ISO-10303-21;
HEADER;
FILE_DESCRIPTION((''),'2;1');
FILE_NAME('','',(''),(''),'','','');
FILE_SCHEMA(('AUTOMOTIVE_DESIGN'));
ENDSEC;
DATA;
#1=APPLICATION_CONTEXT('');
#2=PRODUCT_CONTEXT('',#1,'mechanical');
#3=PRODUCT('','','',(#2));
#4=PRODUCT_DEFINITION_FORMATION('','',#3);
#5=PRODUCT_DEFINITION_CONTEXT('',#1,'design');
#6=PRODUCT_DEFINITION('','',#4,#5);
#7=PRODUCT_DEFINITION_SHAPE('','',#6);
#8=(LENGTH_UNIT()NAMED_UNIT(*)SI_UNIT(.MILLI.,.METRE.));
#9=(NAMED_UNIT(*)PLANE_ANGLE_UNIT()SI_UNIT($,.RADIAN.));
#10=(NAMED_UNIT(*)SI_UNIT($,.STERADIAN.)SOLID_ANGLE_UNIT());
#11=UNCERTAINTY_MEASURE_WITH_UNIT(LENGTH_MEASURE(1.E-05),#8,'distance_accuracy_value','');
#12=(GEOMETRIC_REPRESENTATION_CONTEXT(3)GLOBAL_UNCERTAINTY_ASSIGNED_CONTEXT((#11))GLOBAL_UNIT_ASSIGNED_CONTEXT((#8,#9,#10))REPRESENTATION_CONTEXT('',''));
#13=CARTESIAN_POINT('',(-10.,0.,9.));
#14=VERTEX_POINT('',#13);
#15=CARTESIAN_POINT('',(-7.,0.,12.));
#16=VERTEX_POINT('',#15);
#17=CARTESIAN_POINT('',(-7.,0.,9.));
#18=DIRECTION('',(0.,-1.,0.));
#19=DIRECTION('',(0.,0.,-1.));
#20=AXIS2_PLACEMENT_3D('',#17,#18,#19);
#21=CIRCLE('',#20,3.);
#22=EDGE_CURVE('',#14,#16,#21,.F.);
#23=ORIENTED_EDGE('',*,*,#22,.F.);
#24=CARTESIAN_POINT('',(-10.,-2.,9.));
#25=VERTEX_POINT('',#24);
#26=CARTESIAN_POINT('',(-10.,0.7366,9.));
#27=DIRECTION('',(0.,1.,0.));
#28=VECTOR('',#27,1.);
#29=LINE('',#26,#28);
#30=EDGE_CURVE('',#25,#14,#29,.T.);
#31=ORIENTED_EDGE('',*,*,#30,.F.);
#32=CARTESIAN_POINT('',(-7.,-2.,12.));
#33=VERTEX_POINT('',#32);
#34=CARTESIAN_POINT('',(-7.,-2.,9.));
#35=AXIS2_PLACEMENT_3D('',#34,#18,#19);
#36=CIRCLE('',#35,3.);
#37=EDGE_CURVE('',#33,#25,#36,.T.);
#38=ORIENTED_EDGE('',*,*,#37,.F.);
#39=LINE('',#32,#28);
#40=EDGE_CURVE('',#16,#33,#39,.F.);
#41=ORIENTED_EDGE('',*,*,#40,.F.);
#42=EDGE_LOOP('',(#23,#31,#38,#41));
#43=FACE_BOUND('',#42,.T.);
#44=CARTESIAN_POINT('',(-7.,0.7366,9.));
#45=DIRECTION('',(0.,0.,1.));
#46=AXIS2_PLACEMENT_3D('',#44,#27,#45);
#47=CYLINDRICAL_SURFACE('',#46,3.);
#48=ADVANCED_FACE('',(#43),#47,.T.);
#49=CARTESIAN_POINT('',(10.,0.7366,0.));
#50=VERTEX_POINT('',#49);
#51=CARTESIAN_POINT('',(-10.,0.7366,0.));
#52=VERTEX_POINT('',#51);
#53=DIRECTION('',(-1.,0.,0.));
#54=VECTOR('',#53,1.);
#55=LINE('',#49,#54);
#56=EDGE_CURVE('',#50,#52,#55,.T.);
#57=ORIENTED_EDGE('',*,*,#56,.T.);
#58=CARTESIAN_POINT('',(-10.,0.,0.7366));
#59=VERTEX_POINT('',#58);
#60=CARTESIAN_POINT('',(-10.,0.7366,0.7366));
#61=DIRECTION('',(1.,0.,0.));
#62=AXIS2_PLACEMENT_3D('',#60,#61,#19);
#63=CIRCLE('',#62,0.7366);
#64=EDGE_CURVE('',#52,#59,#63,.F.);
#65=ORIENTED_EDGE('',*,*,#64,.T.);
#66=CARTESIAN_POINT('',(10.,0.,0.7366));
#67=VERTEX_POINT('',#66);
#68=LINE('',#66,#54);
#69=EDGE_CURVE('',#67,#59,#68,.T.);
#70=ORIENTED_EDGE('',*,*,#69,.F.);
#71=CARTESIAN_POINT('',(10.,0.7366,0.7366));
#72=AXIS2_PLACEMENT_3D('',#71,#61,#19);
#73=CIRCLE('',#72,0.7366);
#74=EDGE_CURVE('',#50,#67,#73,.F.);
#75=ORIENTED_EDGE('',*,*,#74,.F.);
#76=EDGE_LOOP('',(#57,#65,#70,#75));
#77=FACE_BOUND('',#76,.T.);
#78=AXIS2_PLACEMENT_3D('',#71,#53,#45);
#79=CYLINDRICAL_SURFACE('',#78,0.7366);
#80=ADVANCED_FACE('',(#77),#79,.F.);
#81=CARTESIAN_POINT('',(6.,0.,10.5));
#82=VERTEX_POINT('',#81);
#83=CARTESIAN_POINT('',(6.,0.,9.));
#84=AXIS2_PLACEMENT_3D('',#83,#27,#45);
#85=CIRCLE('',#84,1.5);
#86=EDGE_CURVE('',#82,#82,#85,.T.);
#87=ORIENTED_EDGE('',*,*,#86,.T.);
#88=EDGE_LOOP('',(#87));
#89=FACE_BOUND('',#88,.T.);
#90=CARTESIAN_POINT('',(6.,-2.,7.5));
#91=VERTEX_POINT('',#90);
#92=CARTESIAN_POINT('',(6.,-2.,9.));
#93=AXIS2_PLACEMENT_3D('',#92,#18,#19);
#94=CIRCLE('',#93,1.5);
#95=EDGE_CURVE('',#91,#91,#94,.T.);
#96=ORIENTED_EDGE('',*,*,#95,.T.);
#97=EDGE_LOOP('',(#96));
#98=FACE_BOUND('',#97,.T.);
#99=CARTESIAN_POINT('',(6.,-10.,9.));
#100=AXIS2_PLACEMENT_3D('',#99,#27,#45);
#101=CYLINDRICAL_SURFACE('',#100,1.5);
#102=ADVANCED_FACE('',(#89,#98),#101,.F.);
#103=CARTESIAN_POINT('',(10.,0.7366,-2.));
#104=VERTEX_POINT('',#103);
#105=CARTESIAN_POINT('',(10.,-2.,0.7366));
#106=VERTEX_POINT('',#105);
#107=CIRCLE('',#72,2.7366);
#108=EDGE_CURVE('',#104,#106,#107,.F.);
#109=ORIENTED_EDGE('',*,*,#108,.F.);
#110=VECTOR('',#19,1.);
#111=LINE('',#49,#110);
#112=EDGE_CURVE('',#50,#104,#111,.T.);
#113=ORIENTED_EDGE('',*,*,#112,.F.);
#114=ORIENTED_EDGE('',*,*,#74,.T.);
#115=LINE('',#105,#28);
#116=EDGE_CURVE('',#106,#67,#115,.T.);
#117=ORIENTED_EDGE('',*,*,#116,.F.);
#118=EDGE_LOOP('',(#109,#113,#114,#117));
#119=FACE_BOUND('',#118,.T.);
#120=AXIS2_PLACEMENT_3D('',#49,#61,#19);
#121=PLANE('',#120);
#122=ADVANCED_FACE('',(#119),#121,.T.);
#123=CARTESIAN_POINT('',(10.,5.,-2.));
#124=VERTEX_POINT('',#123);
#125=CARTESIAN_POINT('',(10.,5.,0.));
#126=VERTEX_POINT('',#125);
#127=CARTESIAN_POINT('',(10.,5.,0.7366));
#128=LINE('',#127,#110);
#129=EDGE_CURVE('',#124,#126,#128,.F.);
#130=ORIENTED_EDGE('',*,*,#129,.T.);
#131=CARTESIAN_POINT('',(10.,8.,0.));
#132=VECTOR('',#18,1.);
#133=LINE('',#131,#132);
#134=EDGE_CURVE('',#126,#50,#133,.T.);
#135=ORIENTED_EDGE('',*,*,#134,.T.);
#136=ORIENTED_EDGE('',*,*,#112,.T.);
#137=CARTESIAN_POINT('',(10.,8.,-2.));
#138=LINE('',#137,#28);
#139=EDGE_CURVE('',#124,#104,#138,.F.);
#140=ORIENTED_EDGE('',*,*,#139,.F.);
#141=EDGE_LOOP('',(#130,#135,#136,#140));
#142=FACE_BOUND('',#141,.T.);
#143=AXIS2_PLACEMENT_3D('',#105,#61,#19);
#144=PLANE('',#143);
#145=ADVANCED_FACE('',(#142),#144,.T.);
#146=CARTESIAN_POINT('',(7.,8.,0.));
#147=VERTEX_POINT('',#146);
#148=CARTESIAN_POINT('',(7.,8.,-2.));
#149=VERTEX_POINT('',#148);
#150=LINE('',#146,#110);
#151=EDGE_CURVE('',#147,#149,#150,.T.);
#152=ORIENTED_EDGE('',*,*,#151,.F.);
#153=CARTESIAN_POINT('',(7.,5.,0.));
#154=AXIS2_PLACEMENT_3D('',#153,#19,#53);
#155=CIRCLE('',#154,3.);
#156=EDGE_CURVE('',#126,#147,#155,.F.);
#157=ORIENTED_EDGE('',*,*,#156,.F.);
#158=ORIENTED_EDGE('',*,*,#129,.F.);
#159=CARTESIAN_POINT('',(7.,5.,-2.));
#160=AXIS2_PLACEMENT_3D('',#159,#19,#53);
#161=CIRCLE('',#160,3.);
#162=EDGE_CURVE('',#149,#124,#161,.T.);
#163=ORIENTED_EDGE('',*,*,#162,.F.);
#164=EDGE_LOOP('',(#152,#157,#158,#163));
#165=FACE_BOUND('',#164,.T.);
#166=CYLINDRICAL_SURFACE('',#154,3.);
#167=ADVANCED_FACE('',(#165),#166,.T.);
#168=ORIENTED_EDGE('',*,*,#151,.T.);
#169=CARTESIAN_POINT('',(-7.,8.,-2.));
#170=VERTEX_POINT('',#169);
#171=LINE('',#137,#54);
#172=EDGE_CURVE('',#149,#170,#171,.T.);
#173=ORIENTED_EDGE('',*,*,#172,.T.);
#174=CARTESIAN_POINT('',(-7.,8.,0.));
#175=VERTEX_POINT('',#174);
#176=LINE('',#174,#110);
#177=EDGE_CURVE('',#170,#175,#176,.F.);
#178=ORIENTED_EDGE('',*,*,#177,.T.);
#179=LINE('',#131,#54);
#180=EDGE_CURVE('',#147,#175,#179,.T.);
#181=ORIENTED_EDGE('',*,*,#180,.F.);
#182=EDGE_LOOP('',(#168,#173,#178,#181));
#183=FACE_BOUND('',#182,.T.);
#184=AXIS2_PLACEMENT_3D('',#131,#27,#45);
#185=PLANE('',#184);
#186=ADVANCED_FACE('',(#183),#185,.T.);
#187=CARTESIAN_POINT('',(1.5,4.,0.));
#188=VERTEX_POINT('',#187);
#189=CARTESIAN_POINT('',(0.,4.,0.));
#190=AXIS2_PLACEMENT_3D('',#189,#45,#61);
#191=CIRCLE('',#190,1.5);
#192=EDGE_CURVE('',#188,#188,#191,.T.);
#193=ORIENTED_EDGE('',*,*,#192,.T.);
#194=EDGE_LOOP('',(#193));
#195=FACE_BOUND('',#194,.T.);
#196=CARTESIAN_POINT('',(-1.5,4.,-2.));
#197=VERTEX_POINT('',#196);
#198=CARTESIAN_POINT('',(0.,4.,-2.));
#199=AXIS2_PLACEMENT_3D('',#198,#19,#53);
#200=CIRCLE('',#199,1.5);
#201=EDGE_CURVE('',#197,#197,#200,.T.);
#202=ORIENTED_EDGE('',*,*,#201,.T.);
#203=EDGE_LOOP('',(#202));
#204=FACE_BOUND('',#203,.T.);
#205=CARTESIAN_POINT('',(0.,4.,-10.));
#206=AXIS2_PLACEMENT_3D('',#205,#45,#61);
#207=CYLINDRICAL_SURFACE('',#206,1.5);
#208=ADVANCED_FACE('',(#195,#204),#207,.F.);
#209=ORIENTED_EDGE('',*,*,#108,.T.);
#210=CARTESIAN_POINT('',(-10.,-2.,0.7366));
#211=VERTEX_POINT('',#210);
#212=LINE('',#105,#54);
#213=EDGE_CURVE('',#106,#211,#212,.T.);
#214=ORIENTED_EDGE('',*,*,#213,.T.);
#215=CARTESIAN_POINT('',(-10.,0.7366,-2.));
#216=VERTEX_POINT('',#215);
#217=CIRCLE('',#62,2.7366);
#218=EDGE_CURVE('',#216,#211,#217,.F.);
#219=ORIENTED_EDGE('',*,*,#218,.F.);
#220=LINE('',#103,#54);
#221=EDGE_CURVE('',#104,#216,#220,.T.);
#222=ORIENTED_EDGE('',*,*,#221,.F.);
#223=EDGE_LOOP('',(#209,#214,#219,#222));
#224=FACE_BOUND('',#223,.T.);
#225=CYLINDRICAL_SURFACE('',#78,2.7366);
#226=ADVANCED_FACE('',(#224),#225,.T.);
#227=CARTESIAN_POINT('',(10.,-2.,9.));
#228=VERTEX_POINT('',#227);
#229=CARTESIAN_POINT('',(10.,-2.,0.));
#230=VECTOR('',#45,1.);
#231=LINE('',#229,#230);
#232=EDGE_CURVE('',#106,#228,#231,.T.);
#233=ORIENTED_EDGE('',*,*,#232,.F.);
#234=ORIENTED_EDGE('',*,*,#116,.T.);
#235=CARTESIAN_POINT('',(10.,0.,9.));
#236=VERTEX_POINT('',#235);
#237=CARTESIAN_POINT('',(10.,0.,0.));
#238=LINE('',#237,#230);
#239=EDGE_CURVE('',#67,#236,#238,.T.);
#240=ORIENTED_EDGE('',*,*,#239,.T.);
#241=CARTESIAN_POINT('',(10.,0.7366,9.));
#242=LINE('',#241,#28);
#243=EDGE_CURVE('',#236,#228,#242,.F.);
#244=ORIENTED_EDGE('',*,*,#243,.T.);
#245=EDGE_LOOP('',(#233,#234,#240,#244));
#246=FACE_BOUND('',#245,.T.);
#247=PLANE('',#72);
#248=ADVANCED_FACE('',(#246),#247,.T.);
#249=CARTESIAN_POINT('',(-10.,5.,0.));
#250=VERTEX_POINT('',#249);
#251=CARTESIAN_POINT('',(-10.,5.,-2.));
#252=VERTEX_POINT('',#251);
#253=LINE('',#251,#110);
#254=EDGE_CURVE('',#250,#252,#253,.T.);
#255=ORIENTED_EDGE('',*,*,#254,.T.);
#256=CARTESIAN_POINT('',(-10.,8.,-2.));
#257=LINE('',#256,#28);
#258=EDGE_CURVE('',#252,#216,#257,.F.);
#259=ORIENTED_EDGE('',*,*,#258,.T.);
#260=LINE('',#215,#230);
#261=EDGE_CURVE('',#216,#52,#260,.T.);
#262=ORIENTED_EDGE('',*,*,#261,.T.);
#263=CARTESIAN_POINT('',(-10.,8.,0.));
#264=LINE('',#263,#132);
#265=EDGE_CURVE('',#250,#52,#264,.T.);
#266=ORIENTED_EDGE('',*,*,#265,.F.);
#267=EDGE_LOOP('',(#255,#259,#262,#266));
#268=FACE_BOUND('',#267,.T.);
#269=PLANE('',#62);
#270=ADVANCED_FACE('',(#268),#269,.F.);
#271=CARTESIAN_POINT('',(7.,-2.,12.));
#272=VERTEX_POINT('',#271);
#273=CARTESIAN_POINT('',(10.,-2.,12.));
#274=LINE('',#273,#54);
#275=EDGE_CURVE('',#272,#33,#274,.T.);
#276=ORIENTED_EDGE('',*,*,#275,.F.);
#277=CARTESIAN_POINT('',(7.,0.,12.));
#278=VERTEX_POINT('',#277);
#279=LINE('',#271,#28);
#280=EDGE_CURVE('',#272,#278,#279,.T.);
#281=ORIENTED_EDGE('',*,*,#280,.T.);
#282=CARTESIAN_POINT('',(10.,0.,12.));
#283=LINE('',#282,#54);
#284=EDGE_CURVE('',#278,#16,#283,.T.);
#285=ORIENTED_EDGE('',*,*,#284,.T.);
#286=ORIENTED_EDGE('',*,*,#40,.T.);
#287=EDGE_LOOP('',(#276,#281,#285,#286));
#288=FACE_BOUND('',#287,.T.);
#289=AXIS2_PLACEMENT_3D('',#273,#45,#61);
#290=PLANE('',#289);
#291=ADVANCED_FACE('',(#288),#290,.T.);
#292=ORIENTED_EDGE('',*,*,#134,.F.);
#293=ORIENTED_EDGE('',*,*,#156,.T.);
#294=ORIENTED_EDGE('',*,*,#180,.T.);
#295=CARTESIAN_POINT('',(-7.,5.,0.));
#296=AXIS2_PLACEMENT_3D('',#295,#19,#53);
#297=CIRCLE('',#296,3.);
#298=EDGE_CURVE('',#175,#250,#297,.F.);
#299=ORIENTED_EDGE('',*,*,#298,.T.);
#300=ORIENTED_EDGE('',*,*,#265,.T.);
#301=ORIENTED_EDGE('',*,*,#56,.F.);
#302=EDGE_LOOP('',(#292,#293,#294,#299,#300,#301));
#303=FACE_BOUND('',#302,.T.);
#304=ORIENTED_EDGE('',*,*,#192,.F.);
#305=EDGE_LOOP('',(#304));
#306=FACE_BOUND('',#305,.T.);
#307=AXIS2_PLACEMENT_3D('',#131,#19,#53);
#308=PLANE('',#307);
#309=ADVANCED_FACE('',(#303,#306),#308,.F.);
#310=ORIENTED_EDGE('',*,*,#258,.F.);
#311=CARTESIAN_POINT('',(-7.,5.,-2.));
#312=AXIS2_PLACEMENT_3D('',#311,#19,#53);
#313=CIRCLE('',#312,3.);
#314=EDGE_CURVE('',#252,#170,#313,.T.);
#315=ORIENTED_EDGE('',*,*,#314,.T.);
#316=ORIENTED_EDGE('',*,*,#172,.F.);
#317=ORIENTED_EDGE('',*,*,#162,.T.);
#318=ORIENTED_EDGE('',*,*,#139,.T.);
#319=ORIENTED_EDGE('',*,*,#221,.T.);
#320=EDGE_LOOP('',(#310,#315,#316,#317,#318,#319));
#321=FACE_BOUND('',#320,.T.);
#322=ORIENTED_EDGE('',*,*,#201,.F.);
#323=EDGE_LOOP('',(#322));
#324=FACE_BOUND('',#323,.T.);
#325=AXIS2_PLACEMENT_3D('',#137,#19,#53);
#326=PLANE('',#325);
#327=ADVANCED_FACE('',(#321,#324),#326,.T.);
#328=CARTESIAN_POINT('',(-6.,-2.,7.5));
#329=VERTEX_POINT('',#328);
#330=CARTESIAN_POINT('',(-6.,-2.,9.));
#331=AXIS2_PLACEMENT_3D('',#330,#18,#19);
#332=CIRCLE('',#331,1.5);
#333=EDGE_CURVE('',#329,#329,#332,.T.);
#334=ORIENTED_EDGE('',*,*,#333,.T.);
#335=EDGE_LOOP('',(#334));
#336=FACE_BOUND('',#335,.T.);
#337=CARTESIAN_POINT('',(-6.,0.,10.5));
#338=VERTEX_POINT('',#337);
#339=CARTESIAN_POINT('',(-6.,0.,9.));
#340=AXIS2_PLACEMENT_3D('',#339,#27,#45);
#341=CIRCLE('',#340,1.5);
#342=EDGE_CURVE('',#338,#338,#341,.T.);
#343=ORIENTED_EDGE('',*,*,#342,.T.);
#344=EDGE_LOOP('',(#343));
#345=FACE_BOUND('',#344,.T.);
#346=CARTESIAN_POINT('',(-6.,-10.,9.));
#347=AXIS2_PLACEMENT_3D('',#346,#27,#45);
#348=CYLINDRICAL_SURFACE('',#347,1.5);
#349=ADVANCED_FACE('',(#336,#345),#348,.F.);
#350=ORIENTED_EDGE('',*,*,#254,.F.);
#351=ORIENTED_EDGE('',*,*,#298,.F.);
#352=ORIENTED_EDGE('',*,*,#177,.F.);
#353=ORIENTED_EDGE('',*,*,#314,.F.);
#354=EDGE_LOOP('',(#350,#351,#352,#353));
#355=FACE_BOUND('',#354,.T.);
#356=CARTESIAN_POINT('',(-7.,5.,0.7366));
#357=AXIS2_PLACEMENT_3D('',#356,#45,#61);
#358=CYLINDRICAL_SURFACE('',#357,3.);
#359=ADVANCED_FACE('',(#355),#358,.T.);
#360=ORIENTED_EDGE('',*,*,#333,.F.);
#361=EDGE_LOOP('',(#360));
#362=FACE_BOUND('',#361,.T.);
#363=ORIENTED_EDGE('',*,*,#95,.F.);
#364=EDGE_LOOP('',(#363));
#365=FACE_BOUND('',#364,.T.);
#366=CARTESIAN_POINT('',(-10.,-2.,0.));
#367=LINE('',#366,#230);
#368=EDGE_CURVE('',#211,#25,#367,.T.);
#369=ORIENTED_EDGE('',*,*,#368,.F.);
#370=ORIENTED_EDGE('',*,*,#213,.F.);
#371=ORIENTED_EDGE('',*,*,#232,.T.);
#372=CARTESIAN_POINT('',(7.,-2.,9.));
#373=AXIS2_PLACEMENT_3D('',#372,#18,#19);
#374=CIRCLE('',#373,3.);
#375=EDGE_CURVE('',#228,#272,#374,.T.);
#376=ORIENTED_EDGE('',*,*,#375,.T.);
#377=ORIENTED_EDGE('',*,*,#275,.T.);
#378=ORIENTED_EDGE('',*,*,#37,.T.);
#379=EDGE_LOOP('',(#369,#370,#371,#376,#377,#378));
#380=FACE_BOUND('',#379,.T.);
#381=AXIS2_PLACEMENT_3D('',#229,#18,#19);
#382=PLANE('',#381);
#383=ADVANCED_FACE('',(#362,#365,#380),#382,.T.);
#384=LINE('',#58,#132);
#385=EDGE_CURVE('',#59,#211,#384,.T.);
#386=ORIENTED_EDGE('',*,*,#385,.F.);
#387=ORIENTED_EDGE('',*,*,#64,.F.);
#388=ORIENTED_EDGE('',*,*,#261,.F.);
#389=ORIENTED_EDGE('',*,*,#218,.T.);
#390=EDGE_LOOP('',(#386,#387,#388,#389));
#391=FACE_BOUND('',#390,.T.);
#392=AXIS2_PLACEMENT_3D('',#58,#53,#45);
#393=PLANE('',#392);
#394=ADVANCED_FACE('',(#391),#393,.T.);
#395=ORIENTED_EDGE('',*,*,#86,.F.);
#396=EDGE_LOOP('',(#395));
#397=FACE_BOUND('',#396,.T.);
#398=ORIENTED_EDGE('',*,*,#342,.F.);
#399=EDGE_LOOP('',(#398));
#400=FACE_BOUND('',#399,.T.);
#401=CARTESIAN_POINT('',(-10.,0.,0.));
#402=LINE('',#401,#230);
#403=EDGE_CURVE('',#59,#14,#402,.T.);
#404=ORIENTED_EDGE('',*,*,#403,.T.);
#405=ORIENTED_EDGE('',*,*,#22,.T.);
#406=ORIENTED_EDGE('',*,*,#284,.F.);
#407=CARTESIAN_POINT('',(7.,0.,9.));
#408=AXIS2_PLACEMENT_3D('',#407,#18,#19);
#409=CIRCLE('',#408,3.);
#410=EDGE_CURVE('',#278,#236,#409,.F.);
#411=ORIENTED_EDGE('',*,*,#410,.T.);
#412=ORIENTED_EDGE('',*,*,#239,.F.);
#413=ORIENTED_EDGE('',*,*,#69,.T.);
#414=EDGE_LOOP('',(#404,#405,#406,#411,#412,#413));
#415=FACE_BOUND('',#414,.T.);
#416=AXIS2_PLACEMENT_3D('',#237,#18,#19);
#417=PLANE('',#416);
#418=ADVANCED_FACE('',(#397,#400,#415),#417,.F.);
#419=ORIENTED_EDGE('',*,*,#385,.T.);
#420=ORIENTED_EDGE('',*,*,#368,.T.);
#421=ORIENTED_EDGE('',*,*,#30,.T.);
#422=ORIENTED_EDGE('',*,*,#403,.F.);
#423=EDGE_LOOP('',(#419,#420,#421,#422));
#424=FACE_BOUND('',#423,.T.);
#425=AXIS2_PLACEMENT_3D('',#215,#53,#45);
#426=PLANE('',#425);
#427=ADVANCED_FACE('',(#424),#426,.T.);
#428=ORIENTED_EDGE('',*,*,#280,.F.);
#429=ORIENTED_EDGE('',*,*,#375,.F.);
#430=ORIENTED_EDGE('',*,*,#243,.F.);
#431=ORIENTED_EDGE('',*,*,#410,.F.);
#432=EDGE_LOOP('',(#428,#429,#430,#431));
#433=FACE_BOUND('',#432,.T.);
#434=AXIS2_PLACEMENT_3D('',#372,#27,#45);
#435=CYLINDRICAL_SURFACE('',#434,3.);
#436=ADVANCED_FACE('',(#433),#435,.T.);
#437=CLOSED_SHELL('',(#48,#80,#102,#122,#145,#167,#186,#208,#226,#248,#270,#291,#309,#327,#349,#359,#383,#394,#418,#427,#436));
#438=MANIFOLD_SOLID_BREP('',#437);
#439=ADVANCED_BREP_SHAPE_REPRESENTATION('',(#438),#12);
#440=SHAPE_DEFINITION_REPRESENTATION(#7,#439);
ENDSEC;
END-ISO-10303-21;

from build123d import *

# Parameters (mm, degrees)
BASE_FLANGE1_DEPTH = 10
FILLET1_R          = 3
SKETCH6_R          = 1.5
CUT_EXTRUDE1_DEPTH = 10
SKETCH7_R          = 1.5
CUT_EXTRUDE2_DEPTH = 10


# Sheet-metal steps are written as plain solids
with BuildPart() as part:
    # Sketch1 → Base-Flange1 (new, symmetric)
    with BuildSketch(Plane(origin=(0, 0, 0), x_dir=(0, 0, -1), z_dir=(1, 0, 0))):
        with BuildLine():
            Line((0, 8), (0, 0.7366))
            ThreePointArc((0, 0.7366), (-0.215745145, 0.215745145), (-0.7366, 0))
            Line((-0.7366, 0), (-12, 0))
            Line((-12, 0), (-12, -2))
            Line((-12, -2), (-0.7366, -2))
            ThreePointArc((-0.7366, -2), (1.198468417, -1.198468417), (2, 0.7366))
            Line((2, 0.7366), (2, 8))
            Line((2, 8), (0, 8))
        make_face()
    extrude(amount=BASE_FLANGE1_DEPTH, both=True)

    # Fillet1
    fillet1_edges = [part.edges().sort_by_distance(p)[0] for p in [
        (10, 8, -1),
        (10, -1, 12),
        (-10, 8, -1),
        (-10, -1, 12),
    ]]
    fillet(fillet1_edges, radius=FILLET1_R)

    # Sketch6 → Cut-Extrude1 (cut)
    with BuildSketch(Plane(origin=(0, 0, 0), x_dir=(1, 0, 0), z_dir=(0, 1, 0))):
        with Locations(Location((6, -9, 0), (0, 0, 270))):
            Circle(SKETCH6_R)
        with Locations(Location((-6, -9, 0), (0, 0, 270))):
            Circle(SKETCH6_R)
    extrude(amount=-CUT_EXTRUDE1_DEPTH, mode=Mode.SUBTRACT)

    # Sketch7 → Cut-Extrude2 (cut)
    with BuildSketch(Plane.XY):
        with Locations((0, 4)):
            Circle(SKETCH7_R)
    extrude(amount=-CUT_EXTRUDE2_DEPTH, mode=Mode.SUBTRACT)


solid = part.part
